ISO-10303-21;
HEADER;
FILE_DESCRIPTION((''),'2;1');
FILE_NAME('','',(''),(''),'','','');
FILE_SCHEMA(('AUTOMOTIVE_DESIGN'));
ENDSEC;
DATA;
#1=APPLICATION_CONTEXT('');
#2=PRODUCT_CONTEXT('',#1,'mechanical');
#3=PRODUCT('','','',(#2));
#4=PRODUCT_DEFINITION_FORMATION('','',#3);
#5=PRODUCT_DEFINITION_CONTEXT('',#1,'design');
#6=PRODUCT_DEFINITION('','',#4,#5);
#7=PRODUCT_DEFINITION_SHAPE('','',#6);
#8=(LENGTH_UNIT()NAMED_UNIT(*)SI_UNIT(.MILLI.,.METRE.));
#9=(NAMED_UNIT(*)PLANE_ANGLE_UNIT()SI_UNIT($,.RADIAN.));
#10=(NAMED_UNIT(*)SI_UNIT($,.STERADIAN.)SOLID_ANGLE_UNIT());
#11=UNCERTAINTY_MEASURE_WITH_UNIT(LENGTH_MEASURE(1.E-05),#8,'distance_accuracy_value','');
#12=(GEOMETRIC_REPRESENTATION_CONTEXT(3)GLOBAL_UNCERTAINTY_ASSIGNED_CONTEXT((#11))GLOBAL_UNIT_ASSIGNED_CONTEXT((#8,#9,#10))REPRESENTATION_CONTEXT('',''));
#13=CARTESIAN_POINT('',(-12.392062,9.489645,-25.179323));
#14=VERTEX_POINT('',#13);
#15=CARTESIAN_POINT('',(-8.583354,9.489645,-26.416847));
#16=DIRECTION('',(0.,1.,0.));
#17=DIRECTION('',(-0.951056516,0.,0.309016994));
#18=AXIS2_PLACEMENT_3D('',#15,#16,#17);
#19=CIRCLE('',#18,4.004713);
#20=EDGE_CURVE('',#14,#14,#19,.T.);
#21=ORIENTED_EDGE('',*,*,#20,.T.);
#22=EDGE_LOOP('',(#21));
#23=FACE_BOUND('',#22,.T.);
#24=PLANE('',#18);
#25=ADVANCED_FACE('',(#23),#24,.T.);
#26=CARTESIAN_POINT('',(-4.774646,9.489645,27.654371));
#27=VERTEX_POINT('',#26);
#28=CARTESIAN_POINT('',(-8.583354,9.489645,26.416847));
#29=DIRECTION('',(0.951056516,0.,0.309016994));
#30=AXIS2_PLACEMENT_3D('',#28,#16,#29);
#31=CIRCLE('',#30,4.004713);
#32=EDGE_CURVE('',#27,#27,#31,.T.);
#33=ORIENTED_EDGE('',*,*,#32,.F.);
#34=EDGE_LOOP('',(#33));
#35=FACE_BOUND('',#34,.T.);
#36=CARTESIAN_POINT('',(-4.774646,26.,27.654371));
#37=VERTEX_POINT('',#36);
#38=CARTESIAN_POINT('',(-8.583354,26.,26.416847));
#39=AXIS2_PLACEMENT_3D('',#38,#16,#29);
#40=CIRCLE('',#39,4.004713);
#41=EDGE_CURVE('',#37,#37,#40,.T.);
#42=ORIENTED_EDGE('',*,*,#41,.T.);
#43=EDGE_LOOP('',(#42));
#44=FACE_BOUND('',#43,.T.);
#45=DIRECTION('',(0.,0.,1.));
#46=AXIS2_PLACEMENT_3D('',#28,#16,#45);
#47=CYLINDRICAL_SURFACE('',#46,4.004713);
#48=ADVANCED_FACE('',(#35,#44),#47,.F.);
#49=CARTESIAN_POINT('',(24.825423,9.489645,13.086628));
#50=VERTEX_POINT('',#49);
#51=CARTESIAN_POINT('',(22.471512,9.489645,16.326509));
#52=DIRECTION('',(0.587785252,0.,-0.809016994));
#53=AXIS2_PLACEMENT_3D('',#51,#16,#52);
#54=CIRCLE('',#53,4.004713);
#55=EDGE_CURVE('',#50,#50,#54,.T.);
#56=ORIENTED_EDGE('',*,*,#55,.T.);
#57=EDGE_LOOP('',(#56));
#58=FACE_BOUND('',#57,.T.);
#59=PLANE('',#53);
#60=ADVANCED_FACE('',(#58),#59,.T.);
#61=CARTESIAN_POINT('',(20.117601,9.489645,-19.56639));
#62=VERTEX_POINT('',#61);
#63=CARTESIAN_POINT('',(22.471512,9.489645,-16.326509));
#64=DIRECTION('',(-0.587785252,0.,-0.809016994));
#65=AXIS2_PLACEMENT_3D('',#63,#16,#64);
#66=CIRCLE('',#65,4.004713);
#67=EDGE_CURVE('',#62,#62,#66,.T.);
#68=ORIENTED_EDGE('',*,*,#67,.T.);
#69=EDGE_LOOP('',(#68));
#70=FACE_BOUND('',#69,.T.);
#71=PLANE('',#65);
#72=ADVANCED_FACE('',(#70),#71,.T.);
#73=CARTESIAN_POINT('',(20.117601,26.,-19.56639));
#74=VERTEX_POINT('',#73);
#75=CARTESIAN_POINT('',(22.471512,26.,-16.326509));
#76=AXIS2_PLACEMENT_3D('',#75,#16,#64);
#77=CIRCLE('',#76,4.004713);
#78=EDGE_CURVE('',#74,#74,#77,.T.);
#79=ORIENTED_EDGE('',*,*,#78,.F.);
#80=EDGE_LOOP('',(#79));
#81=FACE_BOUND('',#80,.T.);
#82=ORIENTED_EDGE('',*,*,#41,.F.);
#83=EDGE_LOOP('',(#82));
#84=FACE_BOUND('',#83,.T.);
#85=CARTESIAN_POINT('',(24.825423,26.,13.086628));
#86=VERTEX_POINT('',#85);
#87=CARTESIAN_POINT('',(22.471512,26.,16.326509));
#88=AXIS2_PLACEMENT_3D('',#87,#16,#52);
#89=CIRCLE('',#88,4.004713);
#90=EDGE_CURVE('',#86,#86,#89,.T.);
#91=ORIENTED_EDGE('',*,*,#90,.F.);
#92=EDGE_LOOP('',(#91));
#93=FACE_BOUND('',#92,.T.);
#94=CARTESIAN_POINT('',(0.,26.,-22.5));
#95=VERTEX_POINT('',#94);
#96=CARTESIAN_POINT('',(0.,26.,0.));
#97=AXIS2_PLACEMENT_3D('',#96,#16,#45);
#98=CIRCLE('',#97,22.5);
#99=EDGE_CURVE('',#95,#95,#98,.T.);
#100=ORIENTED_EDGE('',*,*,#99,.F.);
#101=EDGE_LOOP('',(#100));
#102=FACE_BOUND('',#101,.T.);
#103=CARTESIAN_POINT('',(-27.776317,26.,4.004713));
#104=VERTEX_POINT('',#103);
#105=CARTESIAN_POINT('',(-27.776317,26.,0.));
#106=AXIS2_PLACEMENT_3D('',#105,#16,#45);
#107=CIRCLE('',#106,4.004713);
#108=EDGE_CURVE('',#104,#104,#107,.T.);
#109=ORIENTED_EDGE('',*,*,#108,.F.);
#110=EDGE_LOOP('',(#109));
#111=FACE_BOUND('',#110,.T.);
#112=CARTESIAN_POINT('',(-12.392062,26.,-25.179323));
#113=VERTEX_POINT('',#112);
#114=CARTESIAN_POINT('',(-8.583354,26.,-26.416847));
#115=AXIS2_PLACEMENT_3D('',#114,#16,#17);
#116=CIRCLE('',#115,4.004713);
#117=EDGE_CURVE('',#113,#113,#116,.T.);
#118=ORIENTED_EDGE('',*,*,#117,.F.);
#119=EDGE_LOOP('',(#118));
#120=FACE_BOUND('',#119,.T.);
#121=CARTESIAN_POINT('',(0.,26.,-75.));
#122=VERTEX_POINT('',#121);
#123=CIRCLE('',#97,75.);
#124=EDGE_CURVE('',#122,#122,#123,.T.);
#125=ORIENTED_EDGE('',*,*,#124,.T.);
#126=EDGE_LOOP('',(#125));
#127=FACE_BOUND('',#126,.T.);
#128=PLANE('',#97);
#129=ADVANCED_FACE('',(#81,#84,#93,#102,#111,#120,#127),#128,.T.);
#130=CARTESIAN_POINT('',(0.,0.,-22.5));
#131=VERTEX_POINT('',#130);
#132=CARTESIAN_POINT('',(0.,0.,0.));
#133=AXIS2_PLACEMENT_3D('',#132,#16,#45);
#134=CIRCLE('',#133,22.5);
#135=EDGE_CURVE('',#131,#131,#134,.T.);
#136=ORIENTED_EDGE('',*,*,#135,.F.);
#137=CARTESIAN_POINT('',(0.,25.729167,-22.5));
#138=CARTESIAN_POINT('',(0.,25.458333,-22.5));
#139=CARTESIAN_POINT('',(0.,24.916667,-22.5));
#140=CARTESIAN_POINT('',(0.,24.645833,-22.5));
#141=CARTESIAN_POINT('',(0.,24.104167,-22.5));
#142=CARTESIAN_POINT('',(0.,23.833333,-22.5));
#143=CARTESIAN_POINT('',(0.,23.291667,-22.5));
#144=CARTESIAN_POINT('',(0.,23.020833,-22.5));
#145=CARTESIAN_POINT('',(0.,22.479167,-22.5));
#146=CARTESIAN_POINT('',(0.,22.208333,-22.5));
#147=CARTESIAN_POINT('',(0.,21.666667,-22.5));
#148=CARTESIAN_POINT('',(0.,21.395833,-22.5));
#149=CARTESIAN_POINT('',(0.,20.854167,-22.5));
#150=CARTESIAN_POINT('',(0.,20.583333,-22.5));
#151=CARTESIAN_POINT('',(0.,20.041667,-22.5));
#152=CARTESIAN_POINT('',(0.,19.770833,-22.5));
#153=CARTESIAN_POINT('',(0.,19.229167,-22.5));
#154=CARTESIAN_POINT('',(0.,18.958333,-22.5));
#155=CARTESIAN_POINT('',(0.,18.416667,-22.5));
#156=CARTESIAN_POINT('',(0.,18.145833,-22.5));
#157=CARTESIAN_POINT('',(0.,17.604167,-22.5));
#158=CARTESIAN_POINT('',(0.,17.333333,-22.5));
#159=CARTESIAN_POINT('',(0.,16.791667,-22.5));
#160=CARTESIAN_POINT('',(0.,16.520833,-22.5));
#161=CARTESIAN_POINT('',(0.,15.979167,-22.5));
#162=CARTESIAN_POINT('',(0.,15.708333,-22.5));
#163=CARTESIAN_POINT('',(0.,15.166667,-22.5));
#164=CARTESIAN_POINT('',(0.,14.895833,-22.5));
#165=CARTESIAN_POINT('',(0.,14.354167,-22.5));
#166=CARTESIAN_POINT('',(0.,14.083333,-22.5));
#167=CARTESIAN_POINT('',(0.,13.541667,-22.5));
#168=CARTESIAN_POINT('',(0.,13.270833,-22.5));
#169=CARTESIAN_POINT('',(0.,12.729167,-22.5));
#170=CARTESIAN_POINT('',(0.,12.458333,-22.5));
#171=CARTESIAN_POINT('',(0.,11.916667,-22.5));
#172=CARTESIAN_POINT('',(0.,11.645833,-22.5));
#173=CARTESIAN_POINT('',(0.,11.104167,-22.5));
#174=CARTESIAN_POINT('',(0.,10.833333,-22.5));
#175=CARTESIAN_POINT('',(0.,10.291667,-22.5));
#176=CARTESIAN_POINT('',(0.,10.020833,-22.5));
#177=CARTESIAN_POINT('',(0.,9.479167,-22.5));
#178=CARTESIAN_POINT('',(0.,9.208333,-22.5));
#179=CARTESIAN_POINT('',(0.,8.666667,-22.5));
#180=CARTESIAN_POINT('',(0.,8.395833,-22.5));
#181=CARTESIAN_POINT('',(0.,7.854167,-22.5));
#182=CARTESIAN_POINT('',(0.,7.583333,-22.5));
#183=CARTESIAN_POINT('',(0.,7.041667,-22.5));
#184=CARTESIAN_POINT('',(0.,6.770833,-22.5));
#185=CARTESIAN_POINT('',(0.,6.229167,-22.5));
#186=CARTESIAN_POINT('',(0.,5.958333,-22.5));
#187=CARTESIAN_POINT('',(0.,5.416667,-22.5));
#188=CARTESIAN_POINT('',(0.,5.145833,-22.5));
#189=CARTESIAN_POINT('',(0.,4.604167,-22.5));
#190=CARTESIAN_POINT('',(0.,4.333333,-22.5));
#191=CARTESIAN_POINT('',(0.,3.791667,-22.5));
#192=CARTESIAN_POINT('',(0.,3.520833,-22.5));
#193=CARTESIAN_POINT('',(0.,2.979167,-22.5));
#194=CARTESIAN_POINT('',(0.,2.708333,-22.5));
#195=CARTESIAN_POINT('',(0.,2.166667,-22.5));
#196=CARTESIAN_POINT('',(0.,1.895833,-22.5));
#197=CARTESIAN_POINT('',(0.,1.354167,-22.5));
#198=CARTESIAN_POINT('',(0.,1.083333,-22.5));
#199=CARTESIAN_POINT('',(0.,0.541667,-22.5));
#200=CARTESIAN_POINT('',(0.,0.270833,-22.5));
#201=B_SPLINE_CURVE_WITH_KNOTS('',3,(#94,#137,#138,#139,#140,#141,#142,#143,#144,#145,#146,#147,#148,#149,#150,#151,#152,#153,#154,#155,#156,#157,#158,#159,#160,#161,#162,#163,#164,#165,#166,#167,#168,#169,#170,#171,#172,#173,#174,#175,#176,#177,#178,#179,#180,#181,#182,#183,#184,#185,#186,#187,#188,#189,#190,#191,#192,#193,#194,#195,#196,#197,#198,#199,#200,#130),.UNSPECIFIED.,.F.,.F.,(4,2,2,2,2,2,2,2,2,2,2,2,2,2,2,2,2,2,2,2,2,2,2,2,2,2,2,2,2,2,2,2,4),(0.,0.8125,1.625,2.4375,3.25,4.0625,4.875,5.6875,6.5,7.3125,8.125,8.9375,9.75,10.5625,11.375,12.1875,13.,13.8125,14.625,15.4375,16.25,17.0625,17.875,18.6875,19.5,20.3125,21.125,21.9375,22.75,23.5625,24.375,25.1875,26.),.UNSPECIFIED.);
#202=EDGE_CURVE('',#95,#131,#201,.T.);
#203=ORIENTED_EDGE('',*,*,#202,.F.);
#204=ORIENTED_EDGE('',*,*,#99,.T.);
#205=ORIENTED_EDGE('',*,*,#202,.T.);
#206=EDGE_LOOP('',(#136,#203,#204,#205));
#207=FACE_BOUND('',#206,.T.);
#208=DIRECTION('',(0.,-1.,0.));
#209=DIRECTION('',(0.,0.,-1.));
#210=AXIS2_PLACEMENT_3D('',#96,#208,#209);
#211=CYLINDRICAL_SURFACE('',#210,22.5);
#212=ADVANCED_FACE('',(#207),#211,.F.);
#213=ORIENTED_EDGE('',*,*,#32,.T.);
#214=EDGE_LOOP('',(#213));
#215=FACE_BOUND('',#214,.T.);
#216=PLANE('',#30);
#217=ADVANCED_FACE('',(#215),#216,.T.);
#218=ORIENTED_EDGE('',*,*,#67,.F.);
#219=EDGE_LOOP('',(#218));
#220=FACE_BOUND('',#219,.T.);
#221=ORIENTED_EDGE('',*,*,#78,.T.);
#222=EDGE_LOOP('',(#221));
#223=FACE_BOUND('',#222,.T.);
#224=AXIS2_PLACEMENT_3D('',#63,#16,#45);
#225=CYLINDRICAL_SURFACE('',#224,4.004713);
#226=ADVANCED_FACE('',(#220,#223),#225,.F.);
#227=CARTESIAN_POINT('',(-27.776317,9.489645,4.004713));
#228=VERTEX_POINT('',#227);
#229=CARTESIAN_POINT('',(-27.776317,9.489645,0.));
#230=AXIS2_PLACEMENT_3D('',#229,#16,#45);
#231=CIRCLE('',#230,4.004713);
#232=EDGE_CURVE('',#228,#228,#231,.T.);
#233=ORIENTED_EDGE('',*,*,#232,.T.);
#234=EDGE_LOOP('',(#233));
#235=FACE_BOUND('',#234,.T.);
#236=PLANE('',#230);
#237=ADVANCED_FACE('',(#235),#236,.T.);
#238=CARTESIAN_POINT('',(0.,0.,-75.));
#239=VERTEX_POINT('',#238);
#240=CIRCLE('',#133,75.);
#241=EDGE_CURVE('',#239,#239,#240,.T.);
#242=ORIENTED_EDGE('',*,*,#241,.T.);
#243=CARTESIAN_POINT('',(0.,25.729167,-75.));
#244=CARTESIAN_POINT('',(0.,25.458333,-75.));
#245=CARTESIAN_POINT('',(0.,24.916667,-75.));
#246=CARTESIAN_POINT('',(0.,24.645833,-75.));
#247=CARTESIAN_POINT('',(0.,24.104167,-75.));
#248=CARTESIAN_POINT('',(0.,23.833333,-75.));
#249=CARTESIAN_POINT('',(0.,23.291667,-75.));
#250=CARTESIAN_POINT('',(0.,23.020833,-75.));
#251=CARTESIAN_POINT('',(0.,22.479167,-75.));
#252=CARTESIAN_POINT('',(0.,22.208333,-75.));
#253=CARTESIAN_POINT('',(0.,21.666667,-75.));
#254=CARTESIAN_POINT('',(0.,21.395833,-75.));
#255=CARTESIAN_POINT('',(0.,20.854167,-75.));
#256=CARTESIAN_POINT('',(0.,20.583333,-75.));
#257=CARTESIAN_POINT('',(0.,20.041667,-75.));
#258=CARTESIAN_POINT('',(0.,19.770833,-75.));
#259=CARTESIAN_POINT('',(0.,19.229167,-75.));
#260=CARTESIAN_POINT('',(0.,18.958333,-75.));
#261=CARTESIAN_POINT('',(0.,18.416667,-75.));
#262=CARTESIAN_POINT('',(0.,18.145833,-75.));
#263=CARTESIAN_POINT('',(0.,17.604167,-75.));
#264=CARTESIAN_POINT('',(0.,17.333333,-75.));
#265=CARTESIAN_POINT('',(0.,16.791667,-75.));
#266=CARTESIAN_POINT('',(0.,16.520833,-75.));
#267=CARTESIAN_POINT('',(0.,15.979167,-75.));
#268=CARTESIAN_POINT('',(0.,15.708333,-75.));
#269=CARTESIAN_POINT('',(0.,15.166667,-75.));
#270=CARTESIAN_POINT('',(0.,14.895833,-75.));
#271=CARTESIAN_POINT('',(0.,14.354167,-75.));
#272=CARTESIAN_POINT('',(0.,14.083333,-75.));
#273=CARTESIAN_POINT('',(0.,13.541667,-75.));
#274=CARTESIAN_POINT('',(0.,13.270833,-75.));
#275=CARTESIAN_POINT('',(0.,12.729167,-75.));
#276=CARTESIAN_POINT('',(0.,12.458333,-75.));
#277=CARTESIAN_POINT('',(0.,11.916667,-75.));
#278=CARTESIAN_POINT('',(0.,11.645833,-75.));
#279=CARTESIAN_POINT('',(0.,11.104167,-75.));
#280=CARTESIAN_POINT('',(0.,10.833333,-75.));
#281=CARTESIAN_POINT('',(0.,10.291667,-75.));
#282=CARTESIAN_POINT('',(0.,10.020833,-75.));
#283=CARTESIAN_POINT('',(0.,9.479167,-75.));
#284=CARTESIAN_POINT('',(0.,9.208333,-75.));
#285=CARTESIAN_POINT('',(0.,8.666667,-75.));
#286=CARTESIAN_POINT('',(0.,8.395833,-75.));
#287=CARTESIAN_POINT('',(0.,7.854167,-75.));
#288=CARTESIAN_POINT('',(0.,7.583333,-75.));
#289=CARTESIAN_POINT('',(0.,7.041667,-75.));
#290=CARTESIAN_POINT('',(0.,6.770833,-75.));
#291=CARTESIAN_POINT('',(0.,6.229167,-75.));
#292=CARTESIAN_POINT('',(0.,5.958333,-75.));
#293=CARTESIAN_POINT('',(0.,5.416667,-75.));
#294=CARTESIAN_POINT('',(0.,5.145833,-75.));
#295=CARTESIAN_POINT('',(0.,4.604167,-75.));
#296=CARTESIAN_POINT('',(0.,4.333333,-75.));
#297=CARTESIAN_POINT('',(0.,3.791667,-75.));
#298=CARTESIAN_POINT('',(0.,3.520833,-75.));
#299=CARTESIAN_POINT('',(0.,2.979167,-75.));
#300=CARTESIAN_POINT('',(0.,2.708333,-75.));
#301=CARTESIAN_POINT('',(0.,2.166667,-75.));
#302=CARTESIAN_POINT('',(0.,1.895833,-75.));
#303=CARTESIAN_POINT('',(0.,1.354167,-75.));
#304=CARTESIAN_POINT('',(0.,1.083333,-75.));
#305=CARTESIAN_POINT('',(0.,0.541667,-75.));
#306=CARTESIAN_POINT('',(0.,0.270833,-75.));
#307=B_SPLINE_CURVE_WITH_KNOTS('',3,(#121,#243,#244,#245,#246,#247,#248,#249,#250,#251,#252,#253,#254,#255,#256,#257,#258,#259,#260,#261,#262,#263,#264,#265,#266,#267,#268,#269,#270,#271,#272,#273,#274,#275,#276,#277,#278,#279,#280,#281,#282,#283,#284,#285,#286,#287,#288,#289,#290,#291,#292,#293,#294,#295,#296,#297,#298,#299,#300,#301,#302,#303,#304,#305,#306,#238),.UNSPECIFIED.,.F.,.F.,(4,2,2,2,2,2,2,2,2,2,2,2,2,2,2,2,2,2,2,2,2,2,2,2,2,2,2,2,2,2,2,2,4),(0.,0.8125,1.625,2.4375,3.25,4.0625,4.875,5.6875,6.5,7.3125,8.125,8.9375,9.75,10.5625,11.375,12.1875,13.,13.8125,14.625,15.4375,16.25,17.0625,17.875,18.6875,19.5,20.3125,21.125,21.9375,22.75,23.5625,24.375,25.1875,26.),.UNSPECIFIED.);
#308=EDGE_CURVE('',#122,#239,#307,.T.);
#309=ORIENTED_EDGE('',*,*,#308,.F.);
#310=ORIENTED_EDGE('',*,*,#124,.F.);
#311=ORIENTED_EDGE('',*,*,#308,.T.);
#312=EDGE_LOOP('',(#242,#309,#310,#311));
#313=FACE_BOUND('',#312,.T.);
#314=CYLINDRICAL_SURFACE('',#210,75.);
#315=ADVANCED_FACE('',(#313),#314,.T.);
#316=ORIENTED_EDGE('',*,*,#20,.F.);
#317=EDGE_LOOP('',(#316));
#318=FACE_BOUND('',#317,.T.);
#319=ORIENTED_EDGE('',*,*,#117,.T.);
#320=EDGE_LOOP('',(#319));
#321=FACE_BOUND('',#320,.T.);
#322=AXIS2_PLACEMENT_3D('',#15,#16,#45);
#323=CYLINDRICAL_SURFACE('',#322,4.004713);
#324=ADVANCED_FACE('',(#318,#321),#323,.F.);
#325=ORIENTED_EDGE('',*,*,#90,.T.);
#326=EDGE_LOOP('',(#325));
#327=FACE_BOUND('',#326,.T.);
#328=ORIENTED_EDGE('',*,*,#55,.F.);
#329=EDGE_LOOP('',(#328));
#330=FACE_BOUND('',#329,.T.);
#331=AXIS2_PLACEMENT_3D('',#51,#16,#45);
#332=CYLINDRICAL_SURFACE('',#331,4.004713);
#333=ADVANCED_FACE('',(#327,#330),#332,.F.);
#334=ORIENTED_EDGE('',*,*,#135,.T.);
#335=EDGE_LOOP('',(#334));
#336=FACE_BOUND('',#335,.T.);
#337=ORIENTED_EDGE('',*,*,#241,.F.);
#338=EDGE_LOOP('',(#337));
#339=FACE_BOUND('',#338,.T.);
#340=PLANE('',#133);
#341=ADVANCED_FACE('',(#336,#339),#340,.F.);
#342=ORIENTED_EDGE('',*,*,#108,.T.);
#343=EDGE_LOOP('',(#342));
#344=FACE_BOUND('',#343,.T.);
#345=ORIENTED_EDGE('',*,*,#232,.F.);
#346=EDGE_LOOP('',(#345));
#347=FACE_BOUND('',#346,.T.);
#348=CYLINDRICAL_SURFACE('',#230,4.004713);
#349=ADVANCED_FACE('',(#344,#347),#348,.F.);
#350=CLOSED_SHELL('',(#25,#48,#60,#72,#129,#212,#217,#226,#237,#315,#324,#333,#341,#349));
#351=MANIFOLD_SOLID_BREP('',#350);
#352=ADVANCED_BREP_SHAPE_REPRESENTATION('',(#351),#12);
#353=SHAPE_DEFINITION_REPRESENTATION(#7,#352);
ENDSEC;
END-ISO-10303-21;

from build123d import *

# Parameters (mm, degrees)
SKETCH1_R           = 75
BOSS_EXTRUDE1_DEPTH = 26
SKETCH2_R           = 22.5
CUT_EXTRUDE1_DEPTH  = 110.206226929
SKETCH3_R           = 4.004712967
CUT_EXTRUDE2_DEPTH  = 16.510354944
CIRPATTERN1_COUNT   = 5


with BuildPart() as part:
    # Sketch1 → Boss-Extrude1 (new body)
    with BuildSketch(Plane(origin=(0, 0, 0), x_dir=(1, 0, 0), z_dir=(0, 1, 0))):
        Circle(SKETCH1_R)
    extrude(amount=BOSS_EXTRUDE1_DEPTH)

    # Sketch2 → Cut-Extrude1 (cut, through all)
    with BuildSketch(Plane(origin=(0, 0, 0), x_dir=(1, 0, 0), z_dir=(0, 1, 0))):
        Circle(SKETCH2_R)
    extrude(amount=CUT_EXTRUDE1_DEPTH, mode=Mode.SUBTRACT)

    # Sketch3 → Cut-Extrude2 (cut)
    with BuildSketch(Plane(origin=(0, 26, 0), x_dir=(1, 0, 0), z_dir=(0, 1, 0))):
        with Locations((-27.776316684, 0)):
            Circle(SKETCH3_R)
    cut_extrude2 = extrude(amount=-CUT_EXTRUDE2_DEPTH, mode=Mode.SUBTRACT)

    # CirPattern1: Cut-Extrude2 ×5 about axis
    cirpattern1_axis = Axis((0, 0, 0), (0, 1, 0))
    for i in range(1, CIRPATTERN1_COUNT):
        add(cut_extrude2.rotate(cirpattern1_axis, i * 360 / CIRPATTERN1_COUNT), mode=Mode.SUBTRACT)


solid = part.part
